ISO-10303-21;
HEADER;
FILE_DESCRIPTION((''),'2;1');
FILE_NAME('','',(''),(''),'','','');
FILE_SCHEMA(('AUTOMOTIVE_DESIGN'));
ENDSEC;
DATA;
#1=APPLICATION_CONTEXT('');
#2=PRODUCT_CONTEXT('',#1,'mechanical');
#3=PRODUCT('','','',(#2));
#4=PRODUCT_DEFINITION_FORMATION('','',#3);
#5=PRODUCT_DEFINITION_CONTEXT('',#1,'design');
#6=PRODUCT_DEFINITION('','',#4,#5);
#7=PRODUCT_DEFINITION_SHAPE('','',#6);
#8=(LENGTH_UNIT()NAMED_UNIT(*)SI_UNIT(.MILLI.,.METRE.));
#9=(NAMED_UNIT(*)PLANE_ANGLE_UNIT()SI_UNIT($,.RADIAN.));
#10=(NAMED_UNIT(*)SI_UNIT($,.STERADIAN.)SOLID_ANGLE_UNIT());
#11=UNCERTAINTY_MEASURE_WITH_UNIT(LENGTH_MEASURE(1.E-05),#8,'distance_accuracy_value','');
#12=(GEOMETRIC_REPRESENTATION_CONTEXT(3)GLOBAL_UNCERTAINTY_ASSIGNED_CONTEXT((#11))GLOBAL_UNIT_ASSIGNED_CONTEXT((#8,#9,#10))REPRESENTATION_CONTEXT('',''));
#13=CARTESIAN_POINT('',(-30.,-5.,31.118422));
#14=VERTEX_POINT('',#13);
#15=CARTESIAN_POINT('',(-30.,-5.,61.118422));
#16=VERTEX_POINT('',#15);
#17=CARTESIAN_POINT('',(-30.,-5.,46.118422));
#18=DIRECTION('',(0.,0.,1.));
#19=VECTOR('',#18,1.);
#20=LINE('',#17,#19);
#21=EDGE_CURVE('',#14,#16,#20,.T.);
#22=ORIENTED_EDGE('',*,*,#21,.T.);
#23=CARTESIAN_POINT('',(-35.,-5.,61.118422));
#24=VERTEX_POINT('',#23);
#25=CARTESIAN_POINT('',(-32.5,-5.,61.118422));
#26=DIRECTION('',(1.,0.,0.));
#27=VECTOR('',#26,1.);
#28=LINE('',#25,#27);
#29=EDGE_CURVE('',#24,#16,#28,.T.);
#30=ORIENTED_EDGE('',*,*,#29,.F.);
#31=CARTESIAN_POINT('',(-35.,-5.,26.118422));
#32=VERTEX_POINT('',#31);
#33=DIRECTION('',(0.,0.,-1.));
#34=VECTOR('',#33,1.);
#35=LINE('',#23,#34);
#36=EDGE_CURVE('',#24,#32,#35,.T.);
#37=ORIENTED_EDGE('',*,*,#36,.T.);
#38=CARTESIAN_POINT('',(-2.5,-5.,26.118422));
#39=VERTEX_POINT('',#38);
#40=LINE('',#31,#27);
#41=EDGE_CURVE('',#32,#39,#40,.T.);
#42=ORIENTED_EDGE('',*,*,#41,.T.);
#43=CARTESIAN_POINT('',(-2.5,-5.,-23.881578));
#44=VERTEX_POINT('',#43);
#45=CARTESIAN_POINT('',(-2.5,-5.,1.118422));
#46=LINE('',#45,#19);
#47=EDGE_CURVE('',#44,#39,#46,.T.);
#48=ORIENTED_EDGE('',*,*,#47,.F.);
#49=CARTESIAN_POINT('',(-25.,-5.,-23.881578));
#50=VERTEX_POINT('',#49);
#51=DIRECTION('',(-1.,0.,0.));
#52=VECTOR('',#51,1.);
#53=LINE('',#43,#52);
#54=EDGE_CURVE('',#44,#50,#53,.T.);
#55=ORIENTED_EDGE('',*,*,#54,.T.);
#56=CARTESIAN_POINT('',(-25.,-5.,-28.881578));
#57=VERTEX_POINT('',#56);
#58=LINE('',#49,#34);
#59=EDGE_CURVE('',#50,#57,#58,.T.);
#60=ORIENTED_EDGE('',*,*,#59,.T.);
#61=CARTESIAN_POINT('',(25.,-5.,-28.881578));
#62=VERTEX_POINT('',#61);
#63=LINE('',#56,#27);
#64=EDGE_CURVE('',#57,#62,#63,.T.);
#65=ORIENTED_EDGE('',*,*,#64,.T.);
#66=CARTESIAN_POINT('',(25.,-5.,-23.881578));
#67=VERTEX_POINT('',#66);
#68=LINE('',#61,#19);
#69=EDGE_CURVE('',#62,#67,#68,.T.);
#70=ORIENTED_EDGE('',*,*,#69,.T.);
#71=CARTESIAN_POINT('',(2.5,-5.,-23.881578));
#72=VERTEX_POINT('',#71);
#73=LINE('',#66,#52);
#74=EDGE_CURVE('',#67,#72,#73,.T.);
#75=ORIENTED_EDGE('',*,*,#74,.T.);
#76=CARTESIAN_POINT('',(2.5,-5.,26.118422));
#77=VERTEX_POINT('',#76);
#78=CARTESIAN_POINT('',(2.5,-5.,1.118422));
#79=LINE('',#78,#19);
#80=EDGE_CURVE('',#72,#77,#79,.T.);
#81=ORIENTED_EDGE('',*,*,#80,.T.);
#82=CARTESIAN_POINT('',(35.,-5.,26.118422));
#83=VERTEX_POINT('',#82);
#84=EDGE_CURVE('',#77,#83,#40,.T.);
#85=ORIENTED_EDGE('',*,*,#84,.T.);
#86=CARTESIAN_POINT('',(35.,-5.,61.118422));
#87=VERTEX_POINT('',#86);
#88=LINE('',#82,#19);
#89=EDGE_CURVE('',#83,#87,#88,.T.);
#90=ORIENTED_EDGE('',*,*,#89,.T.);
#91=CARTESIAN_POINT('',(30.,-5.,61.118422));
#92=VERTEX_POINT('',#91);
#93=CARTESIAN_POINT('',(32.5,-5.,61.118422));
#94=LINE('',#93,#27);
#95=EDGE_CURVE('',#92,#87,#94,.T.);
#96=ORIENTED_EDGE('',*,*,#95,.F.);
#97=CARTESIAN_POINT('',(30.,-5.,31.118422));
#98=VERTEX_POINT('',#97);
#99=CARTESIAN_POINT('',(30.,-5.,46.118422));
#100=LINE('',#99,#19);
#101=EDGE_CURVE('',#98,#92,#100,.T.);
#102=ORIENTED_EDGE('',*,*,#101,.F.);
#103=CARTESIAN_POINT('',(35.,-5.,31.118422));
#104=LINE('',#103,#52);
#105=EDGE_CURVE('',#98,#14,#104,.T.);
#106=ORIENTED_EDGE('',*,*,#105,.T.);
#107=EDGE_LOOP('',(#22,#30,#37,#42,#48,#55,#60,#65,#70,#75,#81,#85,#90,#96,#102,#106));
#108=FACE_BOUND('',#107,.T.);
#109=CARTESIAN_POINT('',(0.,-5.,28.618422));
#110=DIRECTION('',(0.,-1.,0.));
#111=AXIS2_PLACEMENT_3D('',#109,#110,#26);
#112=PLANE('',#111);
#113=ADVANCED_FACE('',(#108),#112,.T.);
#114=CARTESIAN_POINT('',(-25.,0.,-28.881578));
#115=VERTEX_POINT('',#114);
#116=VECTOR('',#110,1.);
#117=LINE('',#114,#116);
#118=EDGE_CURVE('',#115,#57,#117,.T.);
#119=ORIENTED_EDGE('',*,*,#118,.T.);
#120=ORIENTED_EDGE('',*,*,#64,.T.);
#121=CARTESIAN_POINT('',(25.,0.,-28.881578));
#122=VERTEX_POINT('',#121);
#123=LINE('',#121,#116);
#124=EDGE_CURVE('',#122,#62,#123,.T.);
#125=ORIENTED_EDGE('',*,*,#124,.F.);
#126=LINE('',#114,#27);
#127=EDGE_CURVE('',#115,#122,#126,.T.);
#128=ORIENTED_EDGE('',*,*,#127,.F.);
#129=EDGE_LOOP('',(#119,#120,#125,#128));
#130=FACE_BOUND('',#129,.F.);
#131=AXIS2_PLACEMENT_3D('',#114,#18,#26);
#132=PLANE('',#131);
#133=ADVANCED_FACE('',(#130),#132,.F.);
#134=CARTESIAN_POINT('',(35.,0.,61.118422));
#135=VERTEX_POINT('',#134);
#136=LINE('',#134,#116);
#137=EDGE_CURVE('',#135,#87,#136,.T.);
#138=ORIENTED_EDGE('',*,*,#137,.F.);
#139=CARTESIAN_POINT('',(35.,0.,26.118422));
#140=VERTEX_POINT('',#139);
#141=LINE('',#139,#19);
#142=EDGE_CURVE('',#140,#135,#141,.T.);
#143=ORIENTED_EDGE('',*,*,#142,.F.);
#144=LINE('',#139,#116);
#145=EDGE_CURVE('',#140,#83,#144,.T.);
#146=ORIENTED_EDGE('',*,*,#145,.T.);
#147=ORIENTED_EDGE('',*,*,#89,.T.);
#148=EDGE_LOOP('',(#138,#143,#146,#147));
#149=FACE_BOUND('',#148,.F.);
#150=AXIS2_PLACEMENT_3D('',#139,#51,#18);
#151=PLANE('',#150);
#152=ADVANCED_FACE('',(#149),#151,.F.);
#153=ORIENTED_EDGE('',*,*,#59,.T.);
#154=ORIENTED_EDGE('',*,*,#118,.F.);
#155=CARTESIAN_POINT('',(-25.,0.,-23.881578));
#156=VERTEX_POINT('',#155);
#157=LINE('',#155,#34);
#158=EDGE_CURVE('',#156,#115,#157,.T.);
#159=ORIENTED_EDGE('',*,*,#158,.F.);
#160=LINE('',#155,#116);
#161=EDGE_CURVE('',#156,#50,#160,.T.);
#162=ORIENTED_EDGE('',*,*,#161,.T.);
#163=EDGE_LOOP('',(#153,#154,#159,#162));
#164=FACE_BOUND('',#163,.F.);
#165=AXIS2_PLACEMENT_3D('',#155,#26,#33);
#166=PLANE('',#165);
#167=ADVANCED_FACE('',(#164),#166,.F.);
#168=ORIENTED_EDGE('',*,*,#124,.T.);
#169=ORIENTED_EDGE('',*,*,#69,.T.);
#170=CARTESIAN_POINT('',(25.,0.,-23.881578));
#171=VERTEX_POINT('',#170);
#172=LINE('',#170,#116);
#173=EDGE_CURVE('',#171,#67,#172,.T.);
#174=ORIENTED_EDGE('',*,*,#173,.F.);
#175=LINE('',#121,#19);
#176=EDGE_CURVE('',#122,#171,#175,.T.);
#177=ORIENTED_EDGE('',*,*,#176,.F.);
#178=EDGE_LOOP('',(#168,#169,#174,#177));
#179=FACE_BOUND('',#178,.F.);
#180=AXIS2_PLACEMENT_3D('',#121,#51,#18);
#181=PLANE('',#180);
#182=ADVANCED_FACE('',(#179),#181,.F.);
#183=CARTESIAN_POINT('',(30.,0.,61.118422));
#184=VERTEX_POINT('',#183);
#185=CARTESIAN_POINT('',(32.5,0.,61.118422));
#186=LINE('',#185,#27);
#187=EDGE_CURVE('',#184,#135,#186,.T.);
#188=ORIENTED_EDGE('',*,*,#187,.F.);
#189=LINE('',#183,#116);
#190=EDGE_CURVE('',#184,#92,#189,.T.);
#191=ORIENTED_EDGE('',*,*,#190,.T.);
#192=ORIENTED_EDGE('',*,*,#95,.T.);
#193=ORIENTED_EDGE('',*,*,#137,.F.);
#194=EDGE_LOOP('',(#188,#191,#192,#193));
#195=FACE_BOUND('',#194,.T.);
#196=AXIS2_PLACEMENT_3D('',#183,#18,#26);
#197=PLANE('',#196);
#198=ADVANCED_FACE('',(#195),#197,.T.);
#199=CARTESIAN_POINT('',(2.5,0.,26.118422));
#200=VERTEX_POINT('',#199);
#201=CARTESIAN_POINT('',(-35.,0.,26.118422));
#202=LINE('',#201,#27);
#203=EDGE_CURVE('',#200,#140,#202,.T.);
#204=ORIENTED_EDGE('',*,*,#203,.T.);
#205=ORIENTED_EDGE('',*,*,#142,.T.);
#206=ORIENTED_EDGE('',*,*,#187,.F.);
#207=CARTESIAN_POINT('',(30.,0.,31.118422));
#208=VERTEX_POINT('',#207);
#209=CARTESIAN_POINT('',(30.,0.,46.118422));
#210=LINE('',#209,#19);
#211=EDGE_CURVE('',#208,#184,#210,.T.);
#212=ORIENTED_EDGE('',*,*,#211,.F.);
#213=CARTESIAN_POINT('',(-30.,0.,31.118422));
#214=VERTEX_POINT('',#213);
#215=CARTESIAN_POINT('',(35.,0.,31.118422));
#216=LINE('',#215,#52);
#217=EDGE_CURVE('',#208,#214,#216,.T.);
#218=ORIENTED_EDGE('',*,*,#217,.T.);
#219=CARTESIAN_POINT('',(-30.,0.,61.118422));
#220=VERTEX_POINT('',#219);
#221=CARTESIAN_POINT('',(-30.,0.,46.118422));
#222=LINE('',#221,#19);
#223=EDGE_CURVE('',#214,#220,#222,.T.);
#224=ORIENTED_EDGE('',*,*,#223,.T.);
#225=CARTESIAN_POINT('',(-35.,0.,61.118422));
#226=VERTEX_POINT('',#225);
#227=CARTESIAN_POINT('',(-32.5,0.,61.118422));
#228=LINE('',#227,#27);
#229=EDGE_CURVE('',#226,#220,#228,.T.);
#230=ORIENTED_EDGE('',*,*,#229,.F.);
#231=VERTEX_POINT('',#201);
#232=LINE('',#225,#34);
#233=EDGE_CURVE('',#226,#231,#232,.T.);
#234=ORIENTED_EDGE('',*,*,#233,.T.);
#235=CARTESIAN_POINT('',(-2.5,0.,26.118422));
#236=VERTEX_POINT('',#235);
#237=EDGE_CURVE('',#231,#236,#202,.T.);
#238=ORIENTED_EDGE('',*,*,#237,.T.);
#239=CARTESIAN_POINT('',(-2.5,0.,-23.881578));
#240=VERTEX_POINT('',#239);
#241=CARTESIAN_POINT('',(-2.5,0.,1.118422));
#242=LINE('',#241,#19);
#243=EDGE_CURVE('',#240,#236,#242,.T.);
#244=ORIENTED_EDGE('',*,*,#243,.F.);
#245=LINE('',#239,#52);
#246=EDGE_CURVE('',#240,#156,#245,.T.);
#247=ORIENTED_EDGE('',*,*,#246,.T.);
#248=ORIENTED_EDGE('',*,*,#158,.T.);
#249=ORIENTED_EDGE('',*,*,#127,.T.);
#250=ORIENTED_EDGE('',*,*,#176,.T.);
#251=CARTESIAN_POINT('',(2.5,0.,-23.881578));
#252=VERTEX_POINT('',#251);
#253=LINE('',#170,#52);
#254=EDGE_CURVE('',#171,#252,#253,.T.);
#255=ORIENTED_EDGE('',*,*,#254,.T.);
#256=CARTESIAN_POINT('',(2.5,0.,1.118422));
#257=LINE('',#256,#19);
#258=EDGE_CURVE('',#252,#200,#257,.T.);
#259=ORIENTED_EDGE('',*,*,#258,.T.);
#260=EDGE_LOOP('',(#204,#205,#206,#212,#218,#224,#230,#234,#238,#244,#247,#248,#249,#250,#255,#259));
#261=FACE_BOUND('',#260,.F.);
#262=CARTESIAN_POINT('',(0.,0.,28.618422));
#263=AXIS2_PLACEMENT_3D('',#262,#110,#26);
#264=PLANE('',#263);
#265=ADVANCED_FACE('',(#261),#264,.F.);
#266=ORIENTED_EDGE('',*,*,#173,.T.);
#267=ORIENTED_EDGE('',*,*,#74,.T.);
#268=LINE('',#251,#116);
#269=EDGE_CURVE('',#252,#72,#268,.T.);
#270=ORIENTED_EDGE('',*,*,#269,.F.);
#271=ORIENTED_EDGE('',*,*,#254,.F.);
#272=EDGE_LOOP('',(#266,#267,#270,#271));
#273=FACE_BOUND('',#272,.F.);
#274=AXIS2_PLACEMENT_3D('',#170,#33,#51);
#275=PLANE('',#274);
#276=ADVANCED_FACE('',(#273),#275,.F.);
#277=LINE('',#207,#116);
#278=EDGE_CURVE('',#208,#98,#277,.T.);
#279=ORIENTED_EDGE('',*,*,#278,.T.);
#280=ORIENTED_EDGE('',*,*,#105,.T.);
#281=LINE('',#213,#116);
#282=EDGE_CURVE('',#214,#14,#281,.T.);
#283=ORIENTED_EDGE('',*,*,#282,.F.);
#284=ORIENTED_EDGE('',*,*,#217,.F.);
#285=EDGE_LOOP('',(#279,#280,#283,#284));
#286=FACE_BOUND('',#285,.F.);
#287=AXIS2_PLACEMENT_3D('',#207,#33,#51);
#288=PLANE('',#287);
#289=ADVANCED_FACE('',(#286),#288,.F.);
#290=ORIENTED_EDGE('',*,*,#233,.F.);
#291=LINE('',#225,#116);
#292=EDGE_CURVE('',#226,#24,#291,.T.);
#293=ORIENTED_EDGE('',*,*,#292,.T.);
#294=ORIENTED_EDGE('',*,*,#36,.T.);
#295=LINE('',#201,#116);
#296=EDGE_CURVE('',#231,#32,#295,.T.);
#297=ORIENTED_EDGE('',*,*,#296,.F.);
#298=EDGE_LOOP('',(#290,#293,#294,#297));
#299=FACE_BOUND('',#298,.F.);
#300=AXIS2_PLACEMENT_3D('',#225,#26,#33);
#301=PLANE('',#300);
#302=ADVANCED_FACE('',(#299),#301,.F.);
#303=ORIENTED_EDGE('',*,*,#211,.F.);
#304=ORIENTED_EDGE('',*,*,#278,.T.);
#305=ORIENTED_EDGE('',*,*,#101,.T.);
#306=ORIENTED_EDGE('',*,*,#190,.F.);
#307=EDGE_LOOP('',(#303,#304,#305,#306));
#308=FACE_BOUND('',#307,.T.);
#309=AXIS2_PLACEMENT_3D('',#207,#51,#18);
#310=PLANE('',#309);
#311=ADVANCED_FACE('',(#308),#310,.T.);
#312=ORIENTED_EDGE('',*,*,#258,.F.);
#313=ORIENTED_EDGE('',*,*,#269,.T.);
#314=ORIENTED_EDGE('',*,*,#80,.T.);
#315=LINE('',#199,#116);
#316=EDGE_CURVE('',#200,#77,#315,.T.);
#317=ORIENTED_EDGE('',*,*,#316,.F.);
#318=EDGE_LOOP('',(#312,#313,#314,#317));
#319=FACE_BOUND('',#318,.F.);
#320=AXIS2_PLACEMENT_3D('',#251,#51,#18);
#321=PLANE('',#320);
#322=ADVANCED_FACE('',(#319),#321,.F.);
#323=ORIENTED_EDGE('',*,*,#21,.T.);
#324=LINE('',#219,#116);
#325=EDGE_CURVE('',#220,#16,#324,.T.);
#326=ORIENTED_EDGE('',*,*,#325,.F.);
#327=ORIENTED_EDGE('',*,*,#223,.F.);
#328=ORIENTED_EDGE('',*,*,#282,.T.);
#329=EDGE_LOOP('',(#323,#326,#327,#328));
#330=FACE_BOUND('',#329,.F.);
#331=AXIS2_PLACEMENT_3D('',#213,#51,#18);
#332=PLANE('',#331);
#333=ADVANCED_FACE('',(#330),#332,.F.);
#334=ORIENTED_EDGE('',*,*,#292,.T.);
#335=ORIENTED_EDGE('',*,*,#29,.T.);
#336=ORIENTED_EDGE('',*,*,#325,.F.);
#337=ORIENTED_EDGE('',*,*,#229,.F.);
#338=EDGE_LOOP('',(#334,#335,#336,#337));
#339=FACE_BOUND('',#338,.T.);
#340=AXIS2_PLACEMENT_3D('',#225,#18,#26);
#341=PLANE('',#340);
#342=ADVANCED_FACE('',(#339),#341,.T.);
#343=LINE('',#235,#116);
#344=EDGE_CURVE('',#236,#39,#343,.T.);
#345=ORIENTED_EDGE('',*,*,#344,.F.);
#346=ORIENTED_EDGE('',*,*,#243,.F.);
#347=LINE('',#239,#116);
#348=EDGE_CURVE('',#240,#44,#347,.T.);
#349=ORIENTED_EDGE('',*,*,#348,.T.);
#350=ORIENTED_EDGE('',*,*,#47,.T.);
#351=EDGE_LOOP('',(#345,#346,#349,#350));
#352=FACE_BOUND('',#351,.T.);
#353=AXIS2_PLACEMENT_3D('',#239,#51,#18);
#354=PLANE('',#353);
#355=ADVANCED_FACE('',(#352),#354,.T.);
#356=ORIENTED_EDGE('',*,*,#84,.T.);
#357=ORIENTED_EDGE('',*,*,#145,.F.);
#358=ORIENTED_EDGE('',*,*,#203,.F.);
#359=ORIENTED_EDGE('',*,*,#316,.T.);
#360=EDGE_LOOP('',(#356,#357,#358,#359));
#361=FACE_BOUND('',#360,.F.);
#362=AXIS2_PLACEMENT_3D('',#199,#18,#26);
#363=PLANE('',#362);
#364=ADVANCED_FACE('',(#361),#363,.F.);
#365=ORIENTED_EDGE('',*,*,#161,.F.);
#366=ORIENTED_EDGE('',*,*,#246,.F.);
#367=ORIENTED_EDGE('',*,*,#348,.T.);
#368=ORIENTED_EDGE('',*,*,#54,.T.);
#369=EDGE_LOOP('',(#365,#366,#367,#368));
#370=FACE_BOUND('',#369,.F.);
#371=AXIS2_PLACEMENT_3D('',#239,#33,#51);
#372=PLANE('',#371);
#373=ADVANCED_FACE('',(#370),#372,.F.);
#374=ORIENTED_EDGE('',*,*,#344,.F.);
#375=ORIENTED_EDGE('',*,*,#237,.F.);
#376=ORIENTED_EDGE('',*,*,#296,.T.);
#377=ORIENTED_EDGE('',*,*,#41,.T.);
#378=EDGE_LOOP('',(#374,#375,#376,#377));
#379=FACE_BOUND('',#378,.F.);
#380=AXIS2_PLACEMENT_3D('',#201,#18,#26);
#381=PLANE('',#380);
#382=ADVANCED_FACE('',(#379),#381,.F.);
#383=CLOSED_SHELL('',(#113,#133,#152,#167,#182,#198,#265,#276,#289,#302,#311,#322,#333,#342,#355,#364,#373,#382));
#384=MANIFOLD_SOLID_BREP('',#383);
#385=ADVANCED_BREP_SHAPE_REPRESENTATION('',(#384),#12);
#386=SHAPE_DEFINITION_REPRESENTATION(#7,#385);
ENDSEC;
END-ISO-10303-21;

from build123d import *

# Parameters (mm, degrees)
F0_W     = 5
F0_H     = 50
F0_H_2   = 30
F1_DEPTH = 5


# Not quite as in the source:
# - a feature of the source that left no trace in its solid (it failed there, or was rolled back) is left out


with BuildPart() as f1:
    # F0 (on Front) → F1 (new body)
    with BuildSketch(Plane.XZ):
        Polygon((-35, 26.1184218031), (-2.5, 26.1184218031), (2.5, 26.1184218031), (35, 26.1184218031), (35, 31.1184218031), (30, 31.1184218031), (-30, 31.1184218031), (-35, 31.1184218031), align=None)
        with Locations((0, 1.1184218031)):
            Rectangle(F0_W, F0_H)
        Polygon((2.5, -23.8815781969), (-2.5, -23.8815781969), (-25, -23.8815781969), (-25, -28.8815781969), (25, -28.8815781969), (25, -23.8815781969), align=None)
        with Locations((-32.5, 46.1184218031)):
            Rectangle(F0_W, F0_H_2)
        with Locations((32.5, 46.1184218031)):
            Rectangle(F0_W, F0_H_2)
    extrude(amount=F1_DEPTH)


solid = f1.part
